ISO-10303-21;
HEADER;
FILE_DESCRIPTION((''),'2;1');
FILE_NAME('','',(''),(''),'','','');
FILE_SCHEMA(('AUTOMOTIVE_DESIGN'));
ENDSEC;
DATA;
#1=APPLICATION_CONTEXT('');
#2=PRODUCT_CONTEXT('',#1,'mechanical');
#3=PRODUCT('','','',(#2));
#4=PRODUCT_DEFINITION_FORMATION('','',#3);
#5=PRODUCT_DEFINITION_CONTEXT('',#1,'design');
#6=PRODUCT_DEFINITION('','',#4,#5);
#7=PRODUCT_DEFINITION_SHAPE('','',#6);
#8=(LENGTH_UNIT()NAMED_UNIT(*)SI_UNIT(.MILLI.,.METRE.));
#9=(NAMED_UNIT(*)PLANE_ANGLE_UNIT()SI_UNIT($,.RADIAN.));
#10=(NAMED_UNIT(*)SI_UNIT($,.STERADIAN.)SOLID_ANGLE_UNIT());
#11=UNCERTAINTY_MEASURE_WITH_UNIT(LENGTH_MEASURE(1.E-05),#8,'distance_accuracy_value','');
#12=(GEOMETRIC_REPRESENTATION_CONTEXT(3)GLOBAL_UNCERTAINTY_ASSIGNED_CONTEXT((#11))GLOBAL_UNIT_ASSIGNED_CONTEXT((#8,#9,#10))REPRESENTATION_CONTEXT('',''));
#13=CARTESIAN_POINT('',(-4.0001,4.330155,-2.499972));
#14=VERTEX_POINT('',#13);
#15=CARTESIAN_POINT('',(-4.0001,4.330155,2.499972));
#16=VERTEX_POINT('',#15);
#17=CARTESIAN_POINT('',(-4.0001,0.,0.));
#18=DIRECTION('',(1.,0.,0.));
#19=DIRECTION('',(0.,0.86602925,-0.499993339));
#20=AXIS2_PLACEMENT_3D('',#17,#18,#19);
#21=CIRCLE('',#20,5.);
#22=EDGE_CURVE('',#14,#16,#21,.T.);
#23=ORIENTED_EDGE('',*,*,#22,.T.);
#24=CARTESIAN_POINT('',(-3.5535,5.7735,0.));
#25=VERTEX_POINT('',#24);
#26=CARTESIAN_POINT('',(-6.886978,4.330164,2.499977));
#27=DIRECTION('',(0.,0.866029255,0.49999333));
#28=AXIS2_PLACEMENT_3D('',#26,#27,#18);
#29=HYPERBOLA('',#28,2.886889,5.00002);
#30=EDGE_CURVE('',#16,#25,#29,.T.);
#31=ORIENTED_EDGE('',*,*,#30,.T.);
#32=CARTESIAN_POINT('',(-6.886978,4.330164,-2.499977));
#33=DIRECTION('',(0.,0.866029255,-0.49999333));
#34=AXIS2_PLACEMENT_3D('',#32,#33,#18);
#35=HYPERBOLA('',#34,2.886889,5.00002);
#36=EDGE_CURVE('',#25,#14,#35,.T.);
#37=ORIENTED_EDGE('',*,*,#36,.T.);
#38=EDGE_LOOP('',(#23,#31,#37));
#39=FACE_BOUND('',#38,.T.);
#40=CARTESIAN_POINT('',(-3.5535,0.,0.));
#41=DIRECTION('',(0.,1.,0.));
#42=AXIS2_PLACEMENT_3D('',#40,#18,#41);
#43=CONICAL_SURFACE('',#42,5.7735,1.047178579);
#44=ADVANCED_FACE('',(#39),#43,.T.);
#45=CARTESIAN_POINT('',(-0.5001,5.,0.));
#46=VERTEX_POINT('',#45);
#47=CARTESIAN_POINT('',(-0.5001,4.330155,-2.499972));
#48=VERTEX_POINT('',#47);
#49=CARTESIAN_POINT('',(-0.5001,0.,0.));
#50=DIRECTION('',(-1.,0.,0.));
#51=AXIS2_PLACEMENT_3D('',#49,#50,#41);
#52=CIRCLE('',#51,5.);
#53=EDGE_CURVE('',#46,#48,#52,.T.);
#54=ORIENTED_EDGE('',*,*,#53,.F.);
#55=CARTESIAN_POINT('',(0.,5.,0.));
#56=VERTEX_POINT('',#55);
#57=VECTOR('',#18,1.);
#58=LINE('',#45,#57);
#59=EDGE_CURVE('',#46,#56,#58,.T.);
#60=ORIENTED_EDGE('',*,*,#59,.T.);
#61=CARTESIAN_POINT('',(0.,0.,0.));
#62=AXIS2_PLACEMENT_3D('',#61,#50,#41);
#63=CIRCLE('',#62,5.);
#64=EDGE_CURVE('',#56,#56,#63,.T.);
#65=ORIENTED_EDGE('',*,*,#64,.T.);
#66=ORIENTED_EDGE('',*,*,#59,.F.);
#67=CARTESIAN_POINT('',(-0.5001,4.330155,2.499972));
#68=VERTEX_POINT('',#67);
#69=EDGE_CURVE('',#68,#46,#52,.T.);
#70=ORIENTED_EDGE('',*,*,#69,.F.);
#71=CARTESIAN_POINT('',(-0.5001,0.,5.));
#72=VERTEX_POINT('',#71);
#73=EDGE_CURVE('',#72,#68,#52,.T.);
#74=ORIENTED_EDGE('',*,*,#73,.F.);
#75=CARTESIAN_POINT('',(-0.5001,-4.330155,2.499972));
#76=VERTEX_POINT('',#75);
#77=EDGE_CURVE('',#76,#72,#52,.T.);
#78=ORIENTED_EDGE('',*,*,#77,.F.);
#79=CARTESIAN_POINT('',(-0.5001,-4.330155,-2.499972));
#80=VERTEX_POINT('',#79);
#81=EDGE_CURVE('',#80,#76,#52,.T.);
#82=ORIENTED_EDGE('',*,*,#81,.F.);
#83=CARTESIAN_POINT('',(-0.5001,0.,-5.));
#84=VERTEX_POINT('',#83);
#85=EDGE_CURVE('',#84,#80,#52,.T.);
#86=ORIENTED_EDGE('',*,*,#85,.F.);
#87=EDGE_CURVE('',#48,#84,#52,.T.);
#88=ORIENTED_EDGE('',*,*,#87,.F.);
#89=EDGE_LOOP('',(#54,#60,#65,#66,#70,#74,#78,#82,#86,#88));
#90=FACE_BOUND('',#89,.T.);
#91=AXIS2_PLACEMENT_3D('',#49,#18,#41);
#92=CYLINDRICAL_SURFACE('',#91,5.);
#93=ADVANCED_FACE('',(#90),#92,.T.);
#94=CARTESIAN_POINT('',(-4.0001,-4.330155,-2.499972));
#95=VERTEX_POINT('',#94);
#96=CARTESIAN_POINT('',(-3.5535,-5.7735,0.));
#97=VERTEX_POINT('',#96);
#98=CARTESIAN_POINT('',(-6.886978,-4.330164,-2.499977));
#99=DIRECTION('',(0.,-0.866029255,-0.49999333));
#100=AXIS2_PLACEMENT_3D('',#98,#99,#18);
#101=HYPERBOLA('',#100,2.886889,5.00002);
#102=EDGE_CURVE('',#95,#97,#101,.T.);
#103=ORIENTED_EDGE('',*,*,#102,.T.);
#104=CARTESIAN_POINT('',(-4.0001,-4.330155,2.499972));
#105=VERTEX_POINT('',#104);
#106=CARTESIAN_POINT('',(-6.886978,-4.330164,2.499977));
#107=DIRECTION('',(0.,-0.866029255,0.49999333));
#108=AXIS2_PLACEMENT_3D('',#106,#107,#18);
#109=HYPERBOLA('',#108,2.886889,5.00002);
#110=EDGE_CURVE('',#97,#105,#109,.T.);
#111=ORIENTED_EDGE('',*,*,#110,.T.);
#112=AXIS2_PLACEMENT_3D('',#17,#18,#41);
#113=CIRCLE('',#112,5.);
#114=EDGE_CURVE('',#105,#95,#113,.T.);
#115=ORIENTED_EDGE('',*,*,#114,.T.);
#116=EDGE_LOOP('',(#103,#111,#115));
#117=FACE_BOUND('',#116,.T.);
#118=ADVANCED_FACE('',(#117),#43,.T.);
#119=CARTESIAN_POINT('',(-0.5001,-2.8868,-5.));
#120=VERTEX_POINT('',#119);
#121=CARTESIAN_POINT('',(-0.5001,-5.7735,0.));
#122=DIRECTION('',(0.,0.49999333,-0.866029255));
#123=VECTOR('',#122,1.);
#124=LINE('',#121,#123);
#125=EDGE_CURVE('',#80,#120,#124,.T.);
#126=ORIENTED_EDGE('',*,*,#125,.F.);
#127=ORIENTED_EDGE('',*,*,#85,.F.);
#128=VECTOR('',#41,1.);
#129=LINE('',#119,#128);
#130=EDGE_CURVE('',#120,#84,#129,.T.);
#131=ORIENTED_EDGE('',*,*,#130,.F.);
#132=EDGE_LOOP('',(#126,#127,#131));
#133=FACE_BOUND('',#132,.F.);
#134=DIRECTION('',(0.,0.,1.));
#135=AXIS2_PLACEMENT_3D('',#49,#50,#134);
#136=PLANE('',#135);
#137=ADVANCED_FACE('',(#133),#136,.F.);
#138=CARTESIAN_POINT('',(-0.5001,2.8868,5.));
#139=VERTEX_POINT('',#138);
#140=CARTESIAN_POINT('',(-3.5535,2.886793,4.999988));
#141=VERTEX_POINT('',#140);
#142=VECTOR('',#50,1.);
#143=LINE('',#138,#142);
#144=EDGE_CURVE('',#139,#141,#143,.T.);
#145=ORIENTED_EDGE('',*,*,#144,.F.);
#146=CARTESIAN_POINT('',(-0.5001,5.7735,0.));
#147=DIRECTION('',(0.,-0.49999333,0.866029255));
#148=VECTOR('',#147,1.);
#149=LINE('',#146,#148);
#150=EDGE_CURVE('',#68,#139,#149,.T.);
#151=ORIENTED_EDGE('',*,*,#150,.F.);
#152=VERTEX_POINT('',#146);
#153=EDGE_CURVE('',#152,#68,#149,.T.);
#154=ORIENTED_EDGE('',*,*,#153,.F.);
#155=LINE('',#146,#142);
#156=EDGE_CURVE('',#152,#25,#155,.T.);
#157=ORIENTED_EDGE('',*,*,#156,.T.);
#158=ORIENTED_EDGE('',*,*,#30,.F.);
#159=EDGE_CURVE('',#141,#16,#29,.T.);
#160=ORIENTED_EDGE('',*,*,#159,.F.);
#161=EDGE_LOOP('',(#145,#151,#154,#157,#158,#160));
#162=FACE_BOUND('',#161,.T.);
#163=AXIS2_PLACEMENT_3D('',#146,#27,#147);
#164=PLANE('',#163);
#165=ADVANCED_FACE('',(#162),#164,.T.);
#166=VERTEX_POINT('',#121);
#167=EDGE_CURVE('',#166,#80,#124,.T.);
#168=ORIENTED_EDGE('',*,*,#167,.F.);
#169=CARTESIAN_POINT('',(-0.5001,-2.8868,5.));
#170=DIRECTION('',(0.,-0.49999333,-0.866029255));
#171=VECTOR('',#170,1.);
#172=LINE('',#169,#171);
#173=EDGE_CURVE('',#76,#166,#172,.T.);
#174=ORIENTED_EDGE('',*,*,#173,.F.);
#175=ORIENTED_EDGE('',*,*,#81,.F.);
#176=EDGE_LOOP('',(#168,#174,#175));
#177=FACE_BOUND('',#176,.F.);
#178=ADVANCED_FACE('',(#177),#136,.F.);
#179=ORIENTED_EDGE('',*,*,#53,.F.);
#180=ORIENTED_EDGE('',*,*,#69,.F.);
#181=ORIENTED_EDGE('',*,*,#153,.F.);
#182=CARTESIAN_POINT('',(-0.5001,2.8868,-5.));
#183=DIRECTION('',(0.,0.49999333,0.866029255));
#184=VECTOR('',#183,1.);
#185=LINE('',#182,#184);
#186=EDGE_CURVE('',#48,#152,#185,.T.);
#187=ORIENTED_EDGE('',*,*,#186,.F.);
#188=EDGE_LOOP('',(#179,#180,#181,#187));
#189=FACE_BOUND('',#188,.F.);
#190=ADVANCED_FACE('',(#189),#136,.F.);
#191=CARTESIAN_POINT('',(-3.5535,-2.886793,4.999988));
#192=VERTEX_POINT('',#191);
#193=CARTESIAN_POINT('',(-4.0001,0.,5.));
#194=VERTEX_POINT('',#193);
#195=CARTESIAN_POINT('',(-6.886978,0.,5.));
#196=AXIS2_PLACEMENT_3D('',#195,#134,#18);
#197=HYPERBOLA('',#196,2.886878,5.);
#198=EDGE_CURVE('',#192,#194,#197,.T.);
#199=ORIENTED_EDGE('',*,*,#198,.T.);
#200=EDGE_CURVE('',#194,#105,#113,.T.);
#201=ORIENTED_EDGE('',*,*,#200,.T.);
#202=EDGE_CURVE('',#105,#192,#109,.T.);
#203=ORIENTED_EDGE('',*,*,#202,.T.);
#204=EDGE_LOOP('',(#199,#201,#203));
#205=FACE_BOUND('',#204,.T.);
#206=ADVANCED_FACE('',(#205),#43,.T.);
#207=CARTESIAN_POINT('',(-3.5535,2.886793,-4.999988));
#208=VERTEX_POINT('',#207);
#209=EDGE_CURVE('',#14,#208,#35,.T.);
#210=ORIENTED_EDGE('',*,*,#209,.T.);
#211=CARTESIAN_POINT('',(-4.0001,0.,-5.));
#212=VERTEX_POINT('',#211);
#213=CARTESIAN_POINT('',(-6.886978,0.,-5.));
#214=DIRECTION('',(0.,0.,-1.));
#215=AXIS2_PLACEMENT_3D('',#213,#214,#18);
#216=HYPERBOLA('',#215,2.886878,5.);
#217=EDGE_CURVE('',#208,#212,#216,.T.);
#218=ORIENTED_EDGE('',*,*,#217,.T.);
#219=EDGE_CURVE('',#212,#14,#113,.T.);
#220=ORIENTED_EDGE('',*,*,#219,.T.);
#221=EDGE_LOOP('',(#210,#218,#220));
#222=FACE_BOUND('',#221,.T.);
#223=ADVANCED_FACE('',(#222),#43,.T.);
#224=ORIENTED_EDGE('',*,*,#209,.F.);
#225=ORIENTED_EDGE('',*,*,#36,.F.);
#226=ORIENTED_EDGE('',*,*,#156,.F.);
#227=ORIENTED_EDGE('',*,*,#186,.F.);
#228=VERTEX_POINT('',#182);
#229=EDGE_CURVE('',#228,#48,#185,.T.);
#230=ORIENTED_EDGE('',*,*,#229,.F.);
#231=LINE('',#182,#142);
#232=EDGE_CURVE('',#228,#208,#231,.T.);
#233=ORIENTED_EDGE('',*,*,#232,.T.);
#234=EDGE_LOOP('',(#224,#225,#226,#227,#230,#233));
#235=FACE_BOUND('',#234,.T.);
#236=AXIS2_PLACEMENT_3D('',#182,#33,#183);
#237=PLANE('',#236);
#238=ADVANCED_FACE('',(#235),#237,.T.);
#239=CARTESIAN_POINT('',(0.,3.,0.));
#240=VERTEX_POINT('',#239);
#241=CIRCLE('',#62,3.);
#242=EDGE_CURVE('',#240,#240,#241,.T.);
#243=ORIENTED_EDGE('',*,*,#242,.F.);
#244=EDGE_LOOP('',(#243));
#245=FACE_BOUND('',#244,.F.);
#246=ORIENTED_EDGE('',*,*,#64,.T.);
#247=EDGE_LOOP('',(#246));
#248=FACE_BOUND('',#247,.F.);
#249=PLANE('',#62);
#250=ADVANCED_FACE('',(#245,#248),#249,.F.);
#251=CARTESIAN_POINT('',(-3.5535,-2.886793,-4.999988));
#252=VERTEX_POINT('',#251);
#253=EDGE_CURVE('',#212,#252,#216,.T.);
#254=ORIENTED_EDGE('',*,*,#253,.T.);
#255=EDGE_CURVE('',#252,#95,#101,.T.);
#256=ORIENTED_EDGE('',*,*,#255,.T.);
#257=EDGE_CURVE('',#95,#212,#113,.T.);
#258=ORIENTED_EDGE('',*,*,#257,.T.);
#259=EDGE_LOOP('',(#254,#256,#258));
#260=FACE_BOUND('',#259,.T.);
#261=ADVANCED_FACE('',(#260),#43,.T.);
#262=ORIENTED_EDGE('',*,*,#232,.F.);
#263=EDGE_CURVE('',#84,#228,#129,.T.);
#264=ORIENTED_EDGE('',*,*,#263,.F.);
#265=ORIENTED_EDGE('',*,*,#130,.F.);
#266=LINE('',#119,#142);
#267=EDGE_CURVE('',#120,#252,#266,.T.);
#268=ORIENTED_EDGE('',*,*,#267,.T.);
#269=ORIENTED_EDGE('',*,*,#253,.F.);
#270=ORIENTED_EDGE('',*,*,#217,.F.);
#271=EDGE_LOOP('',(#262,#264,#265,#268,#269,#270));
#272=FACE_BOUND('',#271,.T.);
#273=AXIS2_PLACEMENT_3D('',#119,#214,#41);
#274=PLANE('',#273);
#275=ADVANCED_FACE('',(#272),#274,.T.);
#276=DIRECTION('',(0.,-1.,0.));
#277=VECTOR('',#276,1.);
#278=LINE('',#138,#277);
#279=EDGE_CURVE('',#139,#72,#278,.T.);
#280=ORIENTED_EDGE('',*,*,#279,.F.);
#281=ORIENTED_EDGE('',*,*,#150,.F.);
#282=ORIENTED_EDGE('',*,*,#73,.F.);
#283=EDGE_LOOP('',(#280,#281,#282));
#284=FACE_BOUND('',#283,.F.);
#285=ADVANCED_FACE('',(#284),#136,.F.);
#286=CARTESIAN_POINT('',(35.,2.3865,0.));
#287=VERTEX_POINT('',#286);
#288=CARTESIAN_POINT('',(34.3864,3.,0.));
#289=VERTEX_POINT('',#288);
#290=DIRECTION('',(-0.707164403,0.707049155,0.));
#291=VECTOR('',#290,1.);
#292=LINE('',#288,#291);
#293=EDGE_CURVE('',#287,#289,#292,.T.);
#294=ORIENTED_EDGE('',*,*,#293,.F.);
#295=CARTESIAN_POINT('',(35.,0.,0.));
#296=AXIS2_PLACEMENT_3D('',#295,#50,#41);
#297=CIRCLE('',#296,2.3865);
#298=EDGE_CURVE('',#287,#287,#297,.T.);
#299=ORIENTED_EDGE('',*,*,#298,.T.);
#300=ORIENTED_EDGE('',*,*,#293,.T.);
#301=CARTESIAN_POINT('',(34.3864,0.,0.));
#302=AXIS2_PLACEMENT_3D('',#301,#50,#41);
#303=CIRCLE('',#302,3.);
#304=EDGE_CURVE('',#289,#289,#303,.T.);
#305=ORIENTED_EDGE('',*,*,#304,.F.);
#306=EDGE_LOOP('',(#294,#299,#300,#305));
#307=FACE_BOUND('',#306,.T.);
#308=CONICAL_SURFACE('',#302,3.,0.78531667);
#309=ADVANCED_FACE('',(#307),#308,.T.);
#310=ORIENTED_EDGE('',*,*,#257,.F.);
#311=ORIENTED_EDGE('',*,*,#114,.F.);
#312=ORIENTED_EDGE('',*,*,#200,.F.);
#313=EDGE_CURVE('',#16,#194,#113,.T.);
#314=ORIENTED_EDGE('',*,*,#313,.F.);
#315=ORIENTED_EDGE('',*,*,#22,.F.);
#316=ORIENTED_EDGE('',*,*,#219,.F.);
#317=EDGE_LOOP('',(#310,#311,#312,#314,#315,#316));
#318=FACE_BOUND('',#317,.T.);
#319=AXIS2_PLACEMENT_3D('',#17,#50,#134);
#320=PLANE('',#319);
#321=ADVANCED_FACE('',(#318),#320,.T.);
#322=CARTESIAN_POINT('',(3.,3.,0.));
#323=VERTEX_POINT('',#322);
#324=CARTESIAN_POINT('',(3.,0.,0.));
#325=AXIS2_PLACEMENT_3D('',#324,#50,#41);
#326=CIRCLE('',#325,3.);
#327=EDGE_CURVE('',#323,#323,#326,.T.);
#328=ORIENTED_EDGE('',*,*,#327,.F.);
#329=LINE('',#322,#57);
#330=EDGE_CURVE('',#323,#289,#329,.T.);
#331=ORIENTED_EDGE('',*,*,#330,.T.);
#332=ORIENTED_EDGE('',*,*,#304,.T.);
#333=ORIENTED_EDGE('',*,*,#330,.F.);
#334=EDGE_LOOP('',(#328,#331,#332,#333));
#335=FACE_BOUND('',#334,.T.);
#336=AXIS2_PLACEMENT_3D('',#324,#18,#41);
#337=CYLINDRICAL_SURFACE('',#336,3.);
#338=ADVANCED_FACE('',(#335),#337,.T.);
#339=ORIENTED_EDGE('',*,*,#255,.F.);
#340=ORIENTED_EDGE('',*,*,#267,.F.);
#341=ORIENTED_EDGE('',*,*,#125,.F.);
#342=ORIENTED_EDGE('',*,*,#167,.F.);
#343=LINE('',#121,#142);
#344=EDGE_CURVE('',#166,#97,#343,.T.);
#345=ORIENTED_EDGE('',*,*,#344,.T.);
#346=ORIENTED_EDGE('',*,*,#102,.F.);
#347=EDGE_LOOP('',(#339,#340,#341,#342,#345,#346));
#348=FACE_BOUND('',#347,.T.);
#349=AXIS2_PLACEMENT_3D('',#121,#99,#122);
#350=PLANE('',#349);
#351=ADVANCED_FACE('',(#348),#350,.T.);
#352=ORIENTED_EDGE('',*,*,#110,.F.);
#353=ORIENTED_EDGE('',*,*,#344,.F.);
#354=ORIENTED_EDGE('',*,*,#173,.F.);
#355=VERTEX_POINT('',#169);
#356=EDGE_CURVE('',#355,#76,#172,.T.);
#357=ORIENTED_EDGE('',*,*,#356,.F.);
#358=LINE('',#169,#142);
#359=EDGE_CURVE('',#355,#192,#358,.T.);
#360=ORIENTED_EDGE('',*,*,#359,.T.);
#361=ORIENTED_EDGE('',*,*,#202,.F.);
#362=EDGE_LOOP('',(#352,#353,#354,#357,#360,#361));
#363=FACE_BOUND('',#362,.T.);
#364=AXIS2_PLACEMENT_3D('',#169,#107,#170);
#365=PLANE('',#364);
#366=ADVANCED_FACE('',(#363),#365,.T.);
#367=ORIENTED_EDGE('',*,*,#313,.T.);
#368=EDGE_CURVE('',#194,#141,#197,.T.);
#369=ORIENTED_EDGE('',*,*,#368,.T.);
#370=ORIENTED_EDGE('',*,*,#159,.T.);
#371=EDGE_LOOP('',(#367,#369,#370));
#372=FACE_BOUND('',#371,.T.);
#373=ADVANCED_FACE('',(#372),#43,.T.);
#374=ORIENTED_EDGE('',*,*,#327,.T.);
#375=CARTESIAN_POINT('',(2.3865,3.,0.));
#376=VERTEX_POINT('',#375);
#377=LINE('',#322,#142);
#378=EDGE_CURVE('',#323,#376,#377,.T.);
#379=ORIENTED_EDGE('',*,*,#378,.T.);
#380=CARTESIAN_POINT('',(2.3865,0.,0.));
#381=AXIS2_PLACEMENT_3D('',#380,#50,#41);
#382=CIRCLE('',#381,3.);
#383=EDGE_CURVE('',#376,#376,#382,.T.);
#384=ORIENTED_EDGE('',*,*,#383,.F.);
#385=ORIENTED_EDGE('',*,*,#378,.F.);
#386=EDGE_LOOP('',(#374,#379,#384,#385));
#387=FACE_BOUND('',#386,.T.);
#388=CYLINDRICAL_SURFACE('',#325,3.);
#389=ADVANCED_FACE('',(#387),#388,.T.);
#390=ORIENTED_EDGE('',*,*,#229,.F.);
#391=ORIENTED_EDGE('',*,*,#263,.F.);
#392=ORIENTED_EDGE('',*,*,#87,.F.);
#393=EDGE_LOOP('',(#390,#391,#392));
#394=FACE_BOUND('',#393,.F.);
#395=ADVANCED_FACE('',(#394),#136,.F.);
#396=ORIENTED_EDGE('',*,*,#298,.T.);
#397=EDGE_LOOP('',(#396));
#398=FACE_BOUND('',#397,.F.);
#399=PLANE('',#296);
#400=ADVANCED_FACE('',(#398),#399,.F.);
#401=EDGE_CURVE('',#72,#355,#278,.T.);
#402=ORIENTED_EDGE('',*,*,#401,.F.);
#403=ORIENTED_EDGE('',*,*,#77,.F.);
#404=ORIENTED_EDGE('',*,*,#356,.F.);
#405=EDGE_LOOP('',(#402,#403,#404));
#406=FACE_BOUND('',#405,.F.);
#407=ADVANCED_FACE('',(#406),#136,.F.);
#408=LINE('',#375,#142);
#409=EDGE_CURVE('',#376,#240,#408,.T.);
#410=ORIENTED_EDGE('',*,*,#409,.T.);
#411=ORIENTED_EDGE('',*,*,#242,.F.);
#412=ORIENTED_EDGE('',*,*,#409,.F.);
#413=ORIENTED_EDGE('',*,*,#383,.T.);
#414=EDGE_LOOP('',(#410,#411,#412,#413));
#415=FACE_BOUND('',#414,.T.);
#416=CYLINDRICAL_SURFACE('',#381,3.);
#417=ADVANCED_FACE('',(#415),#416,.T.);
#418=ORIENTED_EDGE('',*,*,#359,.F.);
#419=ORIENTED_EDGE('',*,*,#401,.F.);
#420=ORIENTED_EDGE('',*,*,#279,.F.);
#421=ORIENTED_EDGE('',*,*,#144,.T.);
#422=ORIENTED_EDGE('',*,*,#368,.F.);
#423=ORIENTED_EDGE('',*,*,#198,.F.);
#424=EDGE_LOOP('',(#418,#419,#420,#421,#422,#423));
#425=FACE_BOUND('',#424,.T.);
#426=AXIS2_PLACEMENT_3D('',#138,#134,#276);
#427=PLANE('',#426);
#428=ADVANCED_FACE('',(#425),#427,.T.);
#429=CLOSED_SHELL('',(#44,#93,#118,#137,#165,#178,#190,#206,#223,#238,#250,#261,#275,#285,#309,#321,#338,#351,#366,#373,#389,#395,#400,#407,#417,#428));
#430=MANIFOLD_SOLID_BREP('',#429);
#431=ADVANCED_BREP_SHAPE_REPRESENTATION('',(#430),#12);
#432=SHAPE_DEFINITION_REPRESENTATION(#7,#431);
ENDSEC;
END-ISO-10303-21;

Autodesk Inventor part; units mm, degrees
ref_plane "YZ Plane" through (0, 0, 0) normal (1, 0, 0) x (0, 1, 0)
ref_plane "XZ Plane" through (0, 0, 0) normal (0, 1, 0) x (-1, 0, 0)
sketch "Sketch1" plane through (0, 0, 0) normal (0, 0, 1) x (1, 0, 0)
  line L0 (0, 5) -> (0, 3)
  line L1 (3, 3) -> (35, 3)
  line L2 (35, 3) -> (35, 0)
  line L3 (35, 0) -> (-0.5001, 0)
  line L4 (-7.6001, 0) -> (42.1, 0) projected
  line L5 (-0.5001, 0) -> (-0.5001, 5)
  line L6 (-0.5001, 5) -> (0, 5)
  line L7 (3, 3) -> (2.3865, 3)
  line L8 (2.3865, 3) -> (0, 3)
  line L9 (0, -1) -> (0, 6) projected
  dimension "d0" = 35
  dimension "d1" = 32
  dimension "d2" = 6
  dimension "d9" = 0.5001
  dimension "d10" = 10
  dimension "d13" = 0.6136
  dimension "d14" = 6
revolve "Body" add sketch "Sketch1" angle 360 about axis through (35, 0, 0) along (-1, 0, 0)
sketch "Sketch2" plane through (-0.5001, 0, 0) normal (-1, 0, 0) x (0, 0, 1)
  line L0 (0, 5.7735) -> (5, 2.8868)
  line L1 (5, 2.8868) -> (5, -2.8868)
  line L2 (5, -2.8868) -> (0, -5.7735)
  line L3 (0, -5.7735) -> (-5, -2.8868)
  line L4 (-5, -2.8868) -> (-5, 2.8868)
  line L5 (-5, 2.8868) -> (0, 5.7735)
  point P0 (0, 0)
  point P1 (0, 0)
  dimension "d11" = 10
extrude "Head" add sketch "Sketch2" along normal blind 3.5
sketch "Sketch4" plane through (0, 0, 0) normal (0, 0, 1) x (1, 0, 0)
  line L0 (-4.0001, 5) -> (-4.0001, 5.7735)
  line L1 (-4.0001, 5.7735) -> (-3.5535, 5.7735)
  line L2 (-3.5535, 5.7735) -> (-4.0001, 5)
  line L3 (-4.7001, 0) -> (0.1999, 0) projected
  line L4 (-0.5001, 5.7735) -> (-4.0001, 5.7735) projected
  line L5 (-4.0001, 2.8868) -> (-4.0001, 5.7735) projected
  dimension "d5" = 30
  dimension "d19" = 10
revolve "Chamfer1" cut sketch "Sketch4" angle 360 about axis through (-10, 0, 0) along (1, 0, 0)
thread "Thread" size "M6x1" class "6g" standard "ISO Metric profile" length 32
chamfer "Chamfer2" distance 0.6135 distance2 0.6136 1 edges at (35, -3, 0) measured on face at (35, 0.7485, -0.6631)
ref_plane "Work Plane1" through (1.525, 0, 0) normal (0, 0, 1) x (1, 0, 0)
equation "\"d0\" = NLG"
equation "\"d1\" = GEL"
equation "\"d2\" = GD"
equation "\"d10\" = SD2"
equation "\"d14\" = BDM"
equation "\"d11\" = SW"
equation "\"d3\" = KOH - SD"
equation "\"d5\" = ANG1"
equation "\"d19\" = SW0"
equation "\"d15\" = GEL"
equation "\"d6\" = -0.5 * SPD + 0.5 * GD"
equation "\"NLG\" = 35"
equation "\"GD\" = NND"
equation "\"BDM\" = NND"
equation "\"KOH\" = 4"
equation "\"GEL\" = 32"
equation "\"SW\" = 10"
equation "\"SW0\" = SW"
equation "\"SPD\" = NND - 1.2269 * PTC"
equation "\"SD2\" = SW"
equation "\"SD\" = 0.5"
equation "\"ANG1\" = 30deg"
equation "\"GAL\" = 0.61345 * PTC"
equation "\"GUL\" = 0.61345 * PTC"
equation "\"RR\" = 0.25"
equation "\"WFT\" = SD"
equation "\"GD1\" = THREADDIA - 1.2269 * PTC"
equation "\"THREADDIA\" = 6"
equation "\"TOA\" = 30deg"
equation "\"FAWI\" = 45deg"
equation "\"PTC\" = 1"
equation "\"NND\" = 6"
equation "\"E0\" = 1.155 * SW"
properties part number "AS 1110 - M6 x 35" material "Steel, Mild"
